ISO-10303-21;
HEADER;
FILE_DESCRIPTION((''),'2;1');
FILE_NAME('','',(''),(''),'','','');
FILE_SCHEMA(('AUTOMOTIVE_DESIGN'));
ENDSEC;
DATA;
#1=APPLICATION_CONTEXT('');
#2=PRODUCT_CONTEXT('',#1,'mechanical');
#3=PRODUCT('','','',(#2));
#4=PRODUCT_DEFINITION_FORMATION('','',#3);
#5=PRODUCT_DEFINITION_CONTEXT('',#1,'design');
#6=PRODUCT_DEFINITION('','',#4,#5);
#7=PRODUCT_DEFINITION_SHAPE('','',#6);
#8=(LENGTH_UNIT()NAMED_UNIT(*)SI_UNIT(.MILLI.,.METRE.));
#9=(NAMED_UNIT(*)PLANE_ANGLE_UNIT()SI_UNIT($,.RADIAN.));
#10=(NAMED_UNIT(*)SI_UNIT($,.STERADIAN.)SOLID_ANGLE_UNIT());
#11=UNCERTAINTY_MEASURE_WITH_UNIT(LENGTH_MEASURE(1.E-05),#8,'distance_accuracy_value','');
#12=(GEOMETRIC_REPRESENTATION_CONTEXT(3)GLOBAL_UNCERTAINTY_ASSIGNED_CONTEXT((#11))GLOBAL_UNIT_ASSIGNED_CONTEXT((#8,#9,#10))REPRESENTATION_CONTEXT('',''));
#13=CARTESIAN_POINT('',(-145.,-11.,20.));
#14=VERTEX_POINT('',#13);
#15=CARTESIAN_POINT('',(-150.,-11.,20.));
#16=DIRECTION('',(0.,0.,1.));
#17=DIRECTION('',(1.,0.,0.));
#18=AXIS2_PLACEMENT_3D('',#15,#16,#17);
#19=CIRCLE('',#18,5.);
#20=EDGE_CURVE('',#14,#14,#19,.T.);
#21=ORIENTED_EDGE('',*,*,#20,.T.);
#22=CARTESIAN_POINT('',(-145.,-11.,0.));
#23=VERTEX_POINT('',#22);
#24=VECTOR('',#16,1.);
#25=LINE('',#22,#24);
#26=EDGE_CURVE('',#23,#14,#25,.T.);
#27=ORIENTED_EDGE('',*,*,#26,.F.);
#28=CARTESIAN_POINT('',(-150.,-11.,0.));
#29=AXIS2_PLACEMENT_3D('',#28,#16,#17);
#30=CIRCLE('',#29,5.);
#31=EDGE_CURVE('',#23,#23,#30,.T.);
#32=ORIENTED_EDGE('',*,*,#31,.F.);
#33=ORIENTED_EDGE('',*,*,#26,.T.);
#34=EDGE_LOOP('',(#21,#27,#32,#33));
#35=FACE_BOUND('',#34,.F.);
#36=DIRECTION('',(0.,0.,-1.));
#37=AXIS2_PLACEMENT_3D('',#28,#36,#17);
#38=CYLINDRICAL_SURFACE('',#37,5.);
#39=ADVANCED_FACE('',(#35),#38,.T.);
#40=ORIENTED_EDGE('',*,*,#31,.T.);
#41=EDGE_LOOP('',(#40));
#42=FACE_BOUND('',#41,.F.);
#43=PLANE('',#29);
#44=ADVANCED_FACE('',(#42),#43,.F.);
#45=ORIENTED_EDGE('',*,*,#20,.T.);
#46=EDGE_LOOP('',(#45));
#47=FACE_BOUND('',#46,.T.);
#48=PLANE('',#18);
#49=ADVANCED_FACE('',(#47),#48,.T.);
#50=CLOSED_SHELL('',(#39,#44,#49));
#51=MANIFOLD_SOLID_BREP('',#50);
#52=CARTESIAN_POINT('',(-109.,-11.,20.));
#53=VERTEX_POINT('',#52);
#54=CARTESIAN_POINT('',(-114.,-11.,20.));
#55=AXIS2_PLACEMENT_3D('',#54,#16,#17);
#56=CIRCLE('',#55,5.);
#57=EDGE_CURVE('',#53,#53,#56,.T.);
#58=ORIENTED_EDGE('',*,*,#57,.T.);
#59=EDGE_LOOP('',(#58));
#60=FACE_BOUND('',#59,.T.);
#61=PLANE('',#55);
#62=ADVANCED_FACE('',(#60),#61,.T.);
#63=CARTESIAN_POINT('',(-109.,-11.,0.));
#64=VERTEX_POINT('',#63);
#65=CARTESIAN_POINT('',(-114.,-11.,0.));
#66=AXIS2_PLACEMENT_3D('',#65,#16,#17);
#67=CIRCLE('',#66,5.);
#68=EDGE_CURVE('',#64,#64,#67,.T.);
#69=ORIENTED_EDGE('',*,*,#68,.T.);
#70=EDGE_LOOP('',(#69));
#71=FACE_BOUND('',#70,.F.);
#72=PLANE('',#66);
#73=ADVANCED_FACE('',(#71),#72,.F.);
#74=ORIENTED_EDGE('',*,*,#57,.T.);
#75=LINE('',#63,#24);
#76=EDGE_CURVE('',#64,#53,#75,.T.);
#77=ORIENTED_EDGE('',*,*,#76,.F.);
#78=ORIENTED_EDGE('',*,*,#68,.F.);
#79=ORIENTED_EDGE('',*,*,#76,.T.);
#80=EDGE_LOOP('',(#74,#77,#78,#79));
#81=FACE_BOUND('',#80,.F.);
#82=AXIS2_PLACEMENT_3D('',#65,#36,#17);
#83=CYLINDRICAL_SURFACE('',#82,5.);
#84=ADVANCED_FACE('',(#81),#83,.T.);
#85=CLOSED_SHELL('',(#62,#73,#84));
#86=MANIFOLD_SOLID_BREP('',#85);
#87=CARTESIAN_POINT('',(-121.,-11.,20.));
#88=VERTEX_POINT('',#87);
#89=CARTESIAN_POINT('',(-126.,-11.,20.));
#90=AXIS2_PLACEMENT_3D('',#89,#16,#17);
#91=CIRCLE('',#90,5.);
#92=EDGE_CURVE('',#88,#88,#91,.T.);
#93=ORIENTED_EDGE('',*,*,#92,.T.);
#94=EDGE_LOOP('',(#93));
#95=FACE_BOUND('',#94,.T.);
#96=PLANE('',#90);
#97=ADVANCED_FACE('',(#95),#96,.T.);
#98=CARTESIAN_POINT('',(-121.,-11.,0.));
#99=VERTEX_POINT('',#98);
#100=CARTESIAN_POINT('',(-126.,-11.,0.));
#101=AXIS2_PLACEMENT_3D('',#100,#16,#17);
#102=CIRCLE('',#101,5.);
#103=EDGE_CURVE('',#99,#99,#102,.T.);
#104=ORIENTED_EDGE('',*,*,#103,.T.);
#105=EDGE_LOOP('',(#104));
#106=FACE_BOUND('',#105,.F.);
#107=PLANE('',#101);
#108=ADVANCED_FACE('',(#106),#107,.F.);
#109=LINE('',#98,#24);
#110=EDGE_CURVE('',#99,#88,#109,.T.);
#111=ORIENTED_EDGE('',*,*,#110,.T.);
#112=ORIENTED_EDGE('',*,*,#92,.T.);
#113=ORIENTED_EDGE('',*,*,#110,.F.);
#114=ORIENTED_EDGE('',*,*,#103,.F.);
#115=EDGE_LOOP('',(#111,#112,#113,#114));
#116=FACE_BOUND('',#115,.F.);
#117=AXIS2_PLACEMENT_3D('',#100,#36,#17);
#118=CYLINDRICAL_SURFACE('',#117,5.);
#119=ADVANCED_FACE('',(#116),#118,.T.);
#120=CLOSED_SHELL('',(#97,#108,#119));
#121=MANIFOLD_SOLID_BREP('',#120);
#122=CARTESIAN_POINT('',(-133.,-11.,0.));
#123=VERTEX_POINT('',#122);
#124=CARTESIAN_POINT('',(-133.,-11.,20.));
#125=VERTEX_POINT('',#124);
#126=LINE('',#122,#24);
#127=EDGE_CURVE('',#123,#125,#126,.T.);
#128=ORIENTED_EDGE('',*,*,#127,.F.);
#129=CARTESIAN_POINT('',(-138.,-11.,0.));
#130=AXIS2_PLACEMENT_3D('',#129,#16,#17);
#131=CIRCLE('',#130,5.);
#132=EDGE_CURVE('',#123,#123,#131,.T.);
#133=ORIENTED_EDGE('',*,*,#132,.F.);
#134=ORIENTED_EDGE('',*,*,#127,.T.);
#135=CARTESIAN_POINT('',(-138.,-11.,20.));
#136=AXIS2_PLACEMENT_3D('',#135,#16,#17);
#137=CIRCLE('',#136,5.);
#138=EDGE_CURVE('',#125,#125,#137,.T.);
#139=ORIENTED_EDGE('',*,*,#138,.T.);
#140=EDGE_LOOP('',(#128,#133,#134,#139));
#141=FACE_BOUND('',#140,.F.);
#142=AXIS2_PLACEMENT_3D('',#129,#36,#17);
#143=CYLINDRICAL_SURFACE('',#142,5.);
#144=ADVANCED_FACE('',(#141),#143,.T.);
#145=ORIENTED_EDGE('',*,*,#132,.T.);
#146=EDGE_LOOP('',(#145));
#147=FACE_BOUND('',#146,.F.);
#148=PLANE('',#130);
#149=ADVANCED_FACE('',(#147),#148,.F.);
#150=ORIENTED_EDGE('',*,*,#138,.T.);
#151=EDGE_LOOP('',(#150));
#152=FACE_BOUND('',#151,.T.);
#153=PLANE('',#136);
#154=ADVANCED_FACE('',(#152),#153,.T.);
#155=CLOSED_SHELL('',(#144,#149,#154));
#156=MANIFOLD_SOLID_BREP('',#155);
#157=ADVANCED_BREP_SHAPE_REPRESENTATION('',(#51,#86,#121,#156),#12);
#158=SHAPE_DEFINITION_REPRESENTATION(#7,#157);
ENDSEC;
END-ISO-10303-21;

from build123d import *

# Parameters (mm, degrees)
F0_R     = 5
F1_DEPTH = 20


# Not quite as in the source:
# - the program builds the solid bodies; features that only make, move or delete a surface that nothing else refers to are left out


with BuildPart() as f1:
    # F0 (on Top) → F1 (new body)
    with BuildSketch(Plane.XY):
        with Locations((-150, -11)):
            Circle(F0_R)
    extrude(amount=F1_DEPTH)


with BuildPart() as f1b:
    # F0 (on Top) → F1, piece 2 (new body)
    with BuildSketch(Plane.XY):
        with Locations((-138, -11)):
            Circle(F0_R)
    extrude(amount=F1_DEPTH)


with BuildPart() as f1c:
    # F0 (on Top) → F1, piece 3 (new body)
    with BuildSketch(Plane.XY):
        with Locations((-126, -11)):
            Circle(F0_R)
    extrude(amount=F1_DEPTH)


with BuildPart() as f1d:
    # F0 (on Top) → F1, piece 4 (new body)
    with BuildSketch(Plane.XY):
        with Locations((-114, -11)):
            Circle(F0_R)
    extrude(amount=F1_DEPTH)


solid = Compound([f1.part, f1b.part, f1c.part, f1d.part])
